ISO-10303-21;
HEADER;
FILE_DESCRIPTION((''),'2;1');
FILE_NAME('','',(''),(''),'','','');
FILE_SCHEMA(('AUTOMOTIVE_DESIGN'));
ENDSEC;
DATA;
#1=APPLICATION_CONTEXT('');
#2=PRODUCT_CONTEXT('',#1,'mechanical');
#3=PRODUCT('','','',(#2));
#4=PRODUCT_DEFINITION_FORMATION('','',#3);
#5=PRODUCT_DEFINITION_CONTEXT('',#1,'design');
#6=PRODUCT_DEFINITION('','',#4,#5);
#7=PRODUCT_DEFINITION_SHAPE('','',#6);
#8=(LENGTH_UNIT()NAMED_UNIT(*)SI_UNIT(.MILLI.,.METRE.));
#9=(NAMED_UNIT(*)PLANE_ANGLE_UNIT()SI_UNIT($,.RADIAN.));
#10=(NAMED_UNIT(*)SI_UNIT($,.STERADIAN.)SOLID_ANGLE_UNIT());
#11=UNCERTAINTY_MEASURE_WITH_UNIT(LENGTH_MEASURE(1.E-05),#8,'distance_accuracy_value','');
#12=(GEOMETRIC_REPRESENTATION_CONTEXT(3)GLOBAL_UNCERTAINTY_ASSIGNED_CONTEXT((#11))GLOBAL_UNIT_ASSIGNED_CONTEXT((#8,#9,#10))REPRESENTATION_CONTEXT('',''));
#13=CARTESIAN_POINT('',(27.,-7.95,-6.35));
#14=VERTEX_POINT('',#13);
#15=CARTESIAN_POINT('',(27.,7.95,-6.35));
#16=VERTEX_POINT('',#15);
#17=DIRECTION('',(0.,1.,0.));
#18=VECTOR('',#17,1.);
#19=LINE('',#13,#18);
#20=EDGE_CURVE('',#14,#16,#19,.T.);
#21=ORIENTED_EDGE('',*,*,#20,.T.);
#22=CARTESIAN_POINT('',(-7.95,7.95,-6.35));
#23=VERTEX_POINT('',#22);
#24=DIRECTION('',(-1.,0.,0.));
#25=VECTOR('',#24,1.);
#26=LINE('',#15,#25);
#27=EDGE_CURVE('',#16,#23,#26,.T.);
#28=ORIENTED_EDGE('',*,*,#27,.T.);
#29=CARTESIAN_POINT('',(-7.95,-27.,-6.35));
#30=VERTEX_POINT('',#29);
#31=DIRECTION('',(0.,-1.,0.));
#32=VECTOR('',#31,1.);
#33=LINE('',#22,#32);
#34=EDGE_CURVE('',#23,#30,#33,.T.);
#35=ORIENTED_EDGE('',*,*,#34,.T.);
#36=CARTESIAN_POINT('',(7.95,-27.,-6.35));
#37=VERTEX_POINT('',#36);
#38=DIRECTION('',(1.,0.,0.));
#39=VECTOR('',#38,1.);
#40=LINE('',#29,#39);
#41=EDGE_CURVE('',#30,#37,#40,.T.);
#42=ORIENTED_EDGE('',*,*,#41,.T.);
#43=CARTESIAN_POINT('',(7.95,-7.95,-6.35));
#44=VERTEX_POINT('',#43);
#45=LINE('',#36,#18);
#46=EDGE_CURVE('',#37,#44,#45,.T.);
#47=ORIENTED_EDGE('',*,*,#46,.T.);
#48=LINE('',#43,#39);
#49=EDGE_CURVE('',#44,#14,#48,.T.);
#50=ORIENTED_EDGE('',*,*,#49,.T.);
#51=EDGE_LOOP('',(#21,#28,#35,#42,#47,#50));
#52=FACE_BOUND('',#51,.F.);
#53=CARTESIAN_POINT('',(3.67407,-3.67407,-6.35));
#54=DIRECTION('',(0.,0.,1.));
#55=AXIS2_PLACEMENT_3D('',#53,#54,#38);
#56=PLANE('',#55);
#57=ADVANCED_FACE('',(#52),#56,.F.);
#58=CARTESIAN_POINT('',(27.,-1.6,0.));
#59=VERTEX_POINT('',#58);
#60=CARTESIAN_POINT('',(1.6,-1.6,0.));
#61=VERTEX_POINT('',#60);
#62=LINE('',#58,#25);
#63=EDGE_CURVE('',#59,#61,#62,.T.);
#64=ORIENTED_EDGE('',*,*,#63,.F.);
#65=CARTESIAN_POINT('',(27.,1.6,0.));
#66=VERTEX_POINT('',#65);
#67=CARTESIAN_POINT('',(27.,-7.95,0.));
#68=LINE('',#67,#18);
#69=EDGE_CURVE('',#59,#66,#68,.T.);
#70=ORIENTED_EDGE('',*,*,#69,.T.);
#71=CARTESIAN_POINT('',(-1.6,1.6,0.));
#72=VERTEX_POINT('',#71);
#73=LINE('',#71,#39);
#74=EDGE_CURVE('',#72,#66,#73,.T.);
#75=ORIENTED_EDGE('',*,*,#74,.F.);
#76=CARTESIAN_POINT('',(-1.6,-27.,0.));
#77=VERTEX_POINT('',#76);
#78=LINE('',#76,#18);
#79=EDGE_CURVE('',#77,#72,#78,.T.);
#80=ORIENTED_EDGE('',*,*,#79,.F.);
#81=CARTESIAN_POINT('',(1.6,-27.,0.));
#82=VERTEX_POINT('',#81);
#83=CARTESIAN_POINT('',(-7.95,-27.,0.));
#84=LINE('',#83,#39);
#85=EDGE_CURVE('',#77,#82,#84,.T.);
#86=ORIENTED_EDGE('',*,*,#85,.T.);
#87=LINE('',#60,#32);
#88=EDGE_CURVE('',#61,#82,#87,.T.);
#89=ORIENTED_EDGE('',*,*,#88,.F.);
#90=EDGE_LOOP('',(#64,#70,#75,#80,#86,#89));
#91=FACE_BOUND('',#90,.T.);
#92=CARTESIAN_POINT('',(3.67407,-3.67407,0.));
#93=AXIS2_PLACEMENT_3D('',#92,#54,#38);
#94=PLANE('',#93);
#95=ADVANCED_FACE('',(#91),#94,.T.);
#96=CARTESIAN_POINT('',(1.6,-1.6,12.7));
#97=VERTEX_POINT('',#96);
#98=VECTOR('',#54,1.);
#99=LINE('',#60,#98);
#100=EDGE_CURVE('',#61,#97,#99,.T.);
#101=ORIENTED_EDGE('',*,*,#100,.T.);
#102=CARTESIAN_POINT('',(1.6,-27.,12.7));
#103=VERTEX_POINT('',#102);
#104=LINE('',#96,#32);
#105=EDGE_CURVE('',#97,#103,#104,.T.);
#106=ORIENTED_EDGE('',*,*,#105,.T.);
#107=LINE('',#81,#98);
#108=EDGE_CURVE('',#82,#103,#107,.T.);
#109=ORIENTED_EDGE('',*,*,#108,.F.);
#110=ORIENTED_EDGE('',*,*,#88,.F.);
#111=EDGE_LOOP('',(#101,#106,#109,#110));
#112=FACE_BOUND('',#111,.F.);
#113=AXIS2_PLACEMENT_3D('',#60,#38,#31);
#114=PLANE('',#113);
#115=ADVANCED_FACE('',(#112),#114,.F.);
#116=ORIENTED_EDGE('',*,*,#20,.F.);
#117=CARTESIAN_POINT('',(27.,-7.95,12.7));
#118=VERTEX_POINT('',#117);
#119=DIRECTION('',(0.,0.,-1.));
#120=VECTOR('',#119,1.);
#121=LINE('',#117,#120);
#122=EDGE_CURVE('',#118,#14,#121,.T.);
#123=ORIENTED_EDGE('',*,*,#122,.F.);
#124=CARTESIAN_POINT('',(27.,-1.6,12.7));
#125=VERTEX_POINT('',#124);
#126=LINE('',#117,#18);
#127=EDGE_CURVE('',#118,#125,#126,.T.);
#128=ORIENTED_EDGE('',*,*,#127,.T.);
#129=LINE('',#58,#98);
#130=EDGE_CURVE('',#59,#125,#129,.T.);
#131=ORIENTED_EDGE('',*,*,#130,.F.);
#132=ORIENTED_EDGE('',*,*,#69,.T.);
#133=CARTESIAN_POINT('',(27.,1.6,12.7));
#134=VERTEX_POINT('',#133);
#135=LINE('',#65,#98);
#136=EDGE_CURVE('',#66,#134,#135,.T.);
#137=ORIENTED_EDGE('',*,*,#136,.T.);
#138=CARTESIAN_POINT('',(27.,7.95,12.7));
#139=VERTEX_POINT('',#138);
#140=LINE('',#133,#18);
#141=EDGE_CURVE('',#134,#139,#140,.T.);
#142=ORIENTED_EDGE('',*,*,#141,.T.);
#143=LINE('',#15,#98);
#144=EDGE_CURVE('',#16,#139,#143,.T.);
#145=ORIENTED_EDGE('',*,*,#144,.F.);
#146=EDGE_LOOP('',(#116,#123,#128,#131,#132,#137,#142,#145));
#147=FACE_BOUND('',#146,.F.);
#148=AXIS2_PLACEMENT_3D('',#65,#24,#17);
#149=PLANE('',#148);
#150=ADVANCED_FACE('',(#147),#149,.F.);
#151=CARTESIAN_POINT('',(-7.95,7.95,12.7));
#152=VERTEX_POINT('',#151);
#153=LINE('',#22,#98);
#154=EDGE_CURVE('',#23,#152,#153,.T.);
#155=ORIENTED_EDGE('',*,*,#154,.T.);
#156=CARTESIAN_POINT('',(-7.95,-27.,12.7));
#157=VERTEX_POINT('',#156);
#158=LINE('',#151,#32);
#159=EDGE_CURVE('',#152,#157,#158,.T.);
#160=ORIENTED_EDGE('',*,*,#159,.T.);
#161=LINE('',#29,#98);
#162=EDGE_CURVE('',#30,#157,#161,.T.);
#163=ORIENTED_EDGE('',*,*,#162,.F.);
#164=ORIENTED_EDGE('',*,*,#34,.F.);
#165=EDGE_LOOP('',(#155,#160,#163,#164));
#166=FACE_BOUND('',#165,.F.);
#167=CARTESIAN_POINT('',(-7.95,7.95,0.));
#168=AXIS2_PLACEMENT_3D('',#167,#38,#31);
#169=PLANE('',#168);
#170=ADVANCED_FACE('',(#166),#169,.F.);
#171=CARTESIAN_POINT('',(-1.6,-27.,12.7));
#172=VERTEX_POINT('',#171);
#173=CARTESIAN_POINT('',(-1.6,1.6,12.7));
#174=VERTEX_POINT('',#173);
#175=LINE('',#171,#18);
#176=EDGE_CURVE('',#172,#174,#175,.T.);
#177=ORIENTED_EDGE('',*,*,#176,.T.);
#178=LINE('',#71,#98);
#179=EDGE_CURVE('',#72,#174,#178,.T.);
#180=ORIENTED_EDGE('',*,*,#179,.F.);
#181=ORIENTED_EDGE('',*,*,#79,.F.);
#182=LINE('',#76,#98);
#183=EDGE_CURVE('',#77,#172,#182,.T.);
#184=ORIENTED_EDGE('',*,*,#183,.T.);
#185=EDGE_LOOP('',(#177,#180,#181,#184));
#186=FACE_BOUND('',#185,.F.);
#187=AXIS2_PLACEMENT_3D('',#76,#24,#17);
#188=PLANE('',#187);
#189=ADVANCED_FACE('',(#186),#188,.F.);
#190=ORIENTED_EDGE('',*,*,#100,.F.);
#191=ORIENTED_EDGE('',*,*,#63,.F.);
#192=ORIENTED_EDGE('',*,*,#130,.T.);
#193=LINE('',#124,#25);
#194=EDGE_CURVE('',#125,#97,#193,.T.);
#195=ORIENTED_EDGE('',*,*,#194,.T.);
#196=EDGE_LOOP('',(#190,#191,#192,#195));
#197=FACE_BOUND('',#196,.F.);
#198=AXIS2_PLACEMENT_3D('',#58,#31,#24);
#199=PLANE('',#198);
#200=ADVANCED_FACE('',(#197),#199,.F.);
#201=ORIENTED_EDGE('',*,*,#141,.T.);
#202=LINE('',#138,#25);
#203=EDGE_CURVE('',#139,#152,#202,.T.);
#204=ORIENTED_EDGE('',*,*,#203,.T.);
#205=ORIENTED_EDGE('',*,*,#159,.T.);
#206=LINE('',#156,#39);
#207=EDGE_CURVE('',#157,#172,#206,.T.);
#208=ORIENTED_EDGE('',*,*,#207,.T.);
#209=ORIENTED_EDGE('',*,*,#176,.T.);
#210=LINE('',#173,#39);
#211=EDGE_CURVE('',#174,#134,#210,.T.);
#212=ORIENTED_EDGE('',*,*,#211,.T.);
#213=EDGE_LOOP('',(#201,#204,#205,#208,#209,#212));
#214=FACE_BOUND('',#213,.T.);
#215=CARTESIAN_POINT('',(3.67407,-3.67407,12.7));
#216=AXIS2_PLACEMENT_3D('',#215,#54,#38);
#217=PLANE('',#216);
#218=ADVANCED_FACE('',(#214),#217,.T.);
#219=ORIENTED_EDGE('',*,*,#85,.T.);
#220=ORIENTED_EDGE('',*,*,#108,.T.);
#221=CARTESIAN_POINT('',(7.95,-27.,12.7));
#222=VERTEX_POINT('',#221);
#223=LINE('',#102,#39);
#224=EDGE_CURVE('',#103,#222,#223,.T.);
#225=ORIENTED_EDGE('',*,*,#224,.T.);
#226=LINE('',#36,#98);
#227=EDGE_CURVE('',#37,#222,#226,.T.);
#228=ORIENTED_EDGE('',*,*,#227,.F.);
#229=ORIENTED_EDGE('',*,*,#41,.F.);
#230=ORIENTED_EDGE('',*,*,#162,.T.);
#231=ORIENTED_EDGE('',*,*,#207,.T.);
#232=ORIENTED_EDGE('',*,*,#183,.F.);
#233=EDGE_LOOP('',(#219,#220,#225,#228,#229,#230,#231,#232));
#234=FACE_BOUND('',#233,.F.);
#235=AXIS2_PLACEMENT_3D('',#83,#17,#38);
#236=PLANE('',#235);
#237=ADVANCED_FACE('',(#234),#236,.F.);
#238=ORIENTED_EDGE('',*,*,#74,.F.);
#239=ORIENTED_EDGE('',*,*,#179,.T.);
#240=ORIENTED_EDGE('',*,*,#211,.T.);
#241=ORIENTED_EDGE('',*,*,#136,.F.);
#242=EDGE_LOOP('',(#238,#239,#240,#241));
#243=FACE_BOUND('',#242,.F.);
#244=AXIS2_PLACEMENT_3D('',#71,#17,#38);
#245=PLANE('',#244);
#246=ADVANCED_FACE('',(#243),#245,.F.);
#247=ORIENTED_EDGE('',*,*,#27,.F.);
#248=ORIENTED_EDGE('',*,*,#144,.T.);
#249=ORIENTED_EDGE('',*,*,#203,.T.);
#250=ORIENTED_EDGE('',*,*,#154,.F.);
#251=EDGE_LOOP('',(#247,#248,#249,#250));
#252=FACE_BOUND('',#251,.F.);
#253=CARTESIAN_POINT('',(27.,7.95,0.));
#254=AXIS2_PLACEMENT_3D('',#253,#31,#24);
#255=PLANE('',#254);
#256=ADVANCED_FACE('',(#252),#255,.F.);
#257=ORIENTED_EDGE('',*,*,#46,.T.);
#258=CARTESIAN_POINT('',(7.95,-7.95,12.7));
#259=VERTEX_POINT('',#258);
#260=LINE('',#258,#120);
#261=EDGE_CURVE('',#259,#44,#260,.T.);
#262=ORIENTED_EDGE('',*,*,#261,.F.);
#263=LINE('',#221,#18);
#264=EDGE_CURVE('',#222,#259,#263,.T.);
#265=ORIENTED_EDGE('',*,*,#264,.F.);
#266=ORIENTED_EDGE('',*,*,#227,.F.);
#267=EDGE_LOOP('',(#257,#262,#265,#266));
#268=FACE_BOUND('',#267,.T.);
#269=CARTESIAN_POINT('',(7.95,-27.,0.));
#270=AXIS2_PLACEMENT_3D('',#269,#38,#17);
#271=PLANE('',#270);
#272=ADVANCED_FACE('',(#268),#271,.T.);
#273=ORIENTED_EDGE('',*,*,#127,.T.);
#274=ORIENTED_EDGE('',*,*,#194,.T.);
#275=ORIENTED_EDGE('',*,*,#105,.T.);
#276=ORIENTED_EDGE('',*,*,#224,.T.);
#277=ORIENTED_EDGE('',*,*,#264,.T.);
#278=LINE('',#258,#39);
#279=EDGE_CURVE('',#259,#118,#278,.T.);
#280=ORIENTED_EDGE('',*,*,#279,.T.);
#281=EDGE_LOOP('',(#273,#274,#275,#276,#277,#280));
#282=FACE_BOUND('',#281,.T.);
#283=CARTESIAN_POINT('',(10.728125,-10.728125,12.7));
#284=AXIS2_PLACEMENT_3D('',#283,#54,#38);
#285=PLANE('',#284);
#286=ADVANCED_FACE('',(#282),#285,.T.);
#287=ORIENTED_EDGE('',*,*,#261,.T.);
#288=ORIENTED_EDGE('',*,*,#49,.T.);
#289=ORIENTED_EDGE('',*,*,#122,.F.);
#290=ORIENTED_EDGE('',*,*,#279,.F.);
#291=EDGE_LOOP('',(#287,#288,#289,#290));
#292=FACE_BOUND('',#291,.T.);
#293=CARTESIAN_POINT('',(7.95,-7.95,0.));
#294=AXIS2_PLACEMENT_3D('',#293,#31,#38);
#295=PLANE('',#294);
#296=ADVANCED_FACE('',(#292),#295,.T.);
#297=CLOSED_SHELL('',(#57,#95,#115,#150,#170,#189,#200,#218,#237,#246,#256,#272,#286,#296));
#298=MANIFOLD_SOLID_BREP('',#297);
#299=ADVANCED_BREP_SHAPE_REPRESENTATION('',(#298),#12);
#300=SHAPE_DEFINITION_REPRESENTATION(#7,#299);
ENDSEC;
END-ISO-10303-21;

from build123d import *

# Parameters (mm, degrees)
F1_DEPTH = 6.35
F2_DEPTH = 12.7


# Not quite as in the source:
# - a feature names something its author has since deleted; it is built from what else it names


with BuildPart() as f1:
    # F0 (on Top) → F1 (new body)
    with BuildSketch(Plane.XY):
        Polygon((1.6, 1.6), (27, 1.6), (27, 7.95), (7.95, 7.95), (-7.95, 7.95), (-7.95, -7.95), (-7.95, -27), (-1.6, -27), (-1.6, -1.6), (-1.6, 1.6), align=None)
        Polygon((27, -7.95), (27, -1.6), (1.6, -1.6), (1.6, -27), (7.95, -27), (7.95, -7.95), align=None)
        Polygon((27, 0), (27, 1.6), (1.6, 1.6), (-1.6, 1.6), (-1.6, -1.6), (-1.6, -27), (0, -27), (1.6, -27), (1.6, -1.6), (27, -1.6), align=None)
    extrude(amount=-F1_DEPTH)

    # F0 (on Top) → F2 (join)
    with BuildSketch(Plane.XY):
        Polygon((1.6, 1.6), (27, 1.6), (27, 7.95), (7.95, 7.95), (-7.95, 7.95), (-7.95, -7.95), (-7.95, -27), (-1.6, -27), (-1.6, -1.6), (-1.6, 1.6), align=None)
        Polygon((27, -7.95), (27, -1.6), (1.6, -1.6), (1.6, -27), (7.95, -27), (7.95, -7.95), align=None)
    extrude(amount=F2_DEPTH)


solid = f1.part
